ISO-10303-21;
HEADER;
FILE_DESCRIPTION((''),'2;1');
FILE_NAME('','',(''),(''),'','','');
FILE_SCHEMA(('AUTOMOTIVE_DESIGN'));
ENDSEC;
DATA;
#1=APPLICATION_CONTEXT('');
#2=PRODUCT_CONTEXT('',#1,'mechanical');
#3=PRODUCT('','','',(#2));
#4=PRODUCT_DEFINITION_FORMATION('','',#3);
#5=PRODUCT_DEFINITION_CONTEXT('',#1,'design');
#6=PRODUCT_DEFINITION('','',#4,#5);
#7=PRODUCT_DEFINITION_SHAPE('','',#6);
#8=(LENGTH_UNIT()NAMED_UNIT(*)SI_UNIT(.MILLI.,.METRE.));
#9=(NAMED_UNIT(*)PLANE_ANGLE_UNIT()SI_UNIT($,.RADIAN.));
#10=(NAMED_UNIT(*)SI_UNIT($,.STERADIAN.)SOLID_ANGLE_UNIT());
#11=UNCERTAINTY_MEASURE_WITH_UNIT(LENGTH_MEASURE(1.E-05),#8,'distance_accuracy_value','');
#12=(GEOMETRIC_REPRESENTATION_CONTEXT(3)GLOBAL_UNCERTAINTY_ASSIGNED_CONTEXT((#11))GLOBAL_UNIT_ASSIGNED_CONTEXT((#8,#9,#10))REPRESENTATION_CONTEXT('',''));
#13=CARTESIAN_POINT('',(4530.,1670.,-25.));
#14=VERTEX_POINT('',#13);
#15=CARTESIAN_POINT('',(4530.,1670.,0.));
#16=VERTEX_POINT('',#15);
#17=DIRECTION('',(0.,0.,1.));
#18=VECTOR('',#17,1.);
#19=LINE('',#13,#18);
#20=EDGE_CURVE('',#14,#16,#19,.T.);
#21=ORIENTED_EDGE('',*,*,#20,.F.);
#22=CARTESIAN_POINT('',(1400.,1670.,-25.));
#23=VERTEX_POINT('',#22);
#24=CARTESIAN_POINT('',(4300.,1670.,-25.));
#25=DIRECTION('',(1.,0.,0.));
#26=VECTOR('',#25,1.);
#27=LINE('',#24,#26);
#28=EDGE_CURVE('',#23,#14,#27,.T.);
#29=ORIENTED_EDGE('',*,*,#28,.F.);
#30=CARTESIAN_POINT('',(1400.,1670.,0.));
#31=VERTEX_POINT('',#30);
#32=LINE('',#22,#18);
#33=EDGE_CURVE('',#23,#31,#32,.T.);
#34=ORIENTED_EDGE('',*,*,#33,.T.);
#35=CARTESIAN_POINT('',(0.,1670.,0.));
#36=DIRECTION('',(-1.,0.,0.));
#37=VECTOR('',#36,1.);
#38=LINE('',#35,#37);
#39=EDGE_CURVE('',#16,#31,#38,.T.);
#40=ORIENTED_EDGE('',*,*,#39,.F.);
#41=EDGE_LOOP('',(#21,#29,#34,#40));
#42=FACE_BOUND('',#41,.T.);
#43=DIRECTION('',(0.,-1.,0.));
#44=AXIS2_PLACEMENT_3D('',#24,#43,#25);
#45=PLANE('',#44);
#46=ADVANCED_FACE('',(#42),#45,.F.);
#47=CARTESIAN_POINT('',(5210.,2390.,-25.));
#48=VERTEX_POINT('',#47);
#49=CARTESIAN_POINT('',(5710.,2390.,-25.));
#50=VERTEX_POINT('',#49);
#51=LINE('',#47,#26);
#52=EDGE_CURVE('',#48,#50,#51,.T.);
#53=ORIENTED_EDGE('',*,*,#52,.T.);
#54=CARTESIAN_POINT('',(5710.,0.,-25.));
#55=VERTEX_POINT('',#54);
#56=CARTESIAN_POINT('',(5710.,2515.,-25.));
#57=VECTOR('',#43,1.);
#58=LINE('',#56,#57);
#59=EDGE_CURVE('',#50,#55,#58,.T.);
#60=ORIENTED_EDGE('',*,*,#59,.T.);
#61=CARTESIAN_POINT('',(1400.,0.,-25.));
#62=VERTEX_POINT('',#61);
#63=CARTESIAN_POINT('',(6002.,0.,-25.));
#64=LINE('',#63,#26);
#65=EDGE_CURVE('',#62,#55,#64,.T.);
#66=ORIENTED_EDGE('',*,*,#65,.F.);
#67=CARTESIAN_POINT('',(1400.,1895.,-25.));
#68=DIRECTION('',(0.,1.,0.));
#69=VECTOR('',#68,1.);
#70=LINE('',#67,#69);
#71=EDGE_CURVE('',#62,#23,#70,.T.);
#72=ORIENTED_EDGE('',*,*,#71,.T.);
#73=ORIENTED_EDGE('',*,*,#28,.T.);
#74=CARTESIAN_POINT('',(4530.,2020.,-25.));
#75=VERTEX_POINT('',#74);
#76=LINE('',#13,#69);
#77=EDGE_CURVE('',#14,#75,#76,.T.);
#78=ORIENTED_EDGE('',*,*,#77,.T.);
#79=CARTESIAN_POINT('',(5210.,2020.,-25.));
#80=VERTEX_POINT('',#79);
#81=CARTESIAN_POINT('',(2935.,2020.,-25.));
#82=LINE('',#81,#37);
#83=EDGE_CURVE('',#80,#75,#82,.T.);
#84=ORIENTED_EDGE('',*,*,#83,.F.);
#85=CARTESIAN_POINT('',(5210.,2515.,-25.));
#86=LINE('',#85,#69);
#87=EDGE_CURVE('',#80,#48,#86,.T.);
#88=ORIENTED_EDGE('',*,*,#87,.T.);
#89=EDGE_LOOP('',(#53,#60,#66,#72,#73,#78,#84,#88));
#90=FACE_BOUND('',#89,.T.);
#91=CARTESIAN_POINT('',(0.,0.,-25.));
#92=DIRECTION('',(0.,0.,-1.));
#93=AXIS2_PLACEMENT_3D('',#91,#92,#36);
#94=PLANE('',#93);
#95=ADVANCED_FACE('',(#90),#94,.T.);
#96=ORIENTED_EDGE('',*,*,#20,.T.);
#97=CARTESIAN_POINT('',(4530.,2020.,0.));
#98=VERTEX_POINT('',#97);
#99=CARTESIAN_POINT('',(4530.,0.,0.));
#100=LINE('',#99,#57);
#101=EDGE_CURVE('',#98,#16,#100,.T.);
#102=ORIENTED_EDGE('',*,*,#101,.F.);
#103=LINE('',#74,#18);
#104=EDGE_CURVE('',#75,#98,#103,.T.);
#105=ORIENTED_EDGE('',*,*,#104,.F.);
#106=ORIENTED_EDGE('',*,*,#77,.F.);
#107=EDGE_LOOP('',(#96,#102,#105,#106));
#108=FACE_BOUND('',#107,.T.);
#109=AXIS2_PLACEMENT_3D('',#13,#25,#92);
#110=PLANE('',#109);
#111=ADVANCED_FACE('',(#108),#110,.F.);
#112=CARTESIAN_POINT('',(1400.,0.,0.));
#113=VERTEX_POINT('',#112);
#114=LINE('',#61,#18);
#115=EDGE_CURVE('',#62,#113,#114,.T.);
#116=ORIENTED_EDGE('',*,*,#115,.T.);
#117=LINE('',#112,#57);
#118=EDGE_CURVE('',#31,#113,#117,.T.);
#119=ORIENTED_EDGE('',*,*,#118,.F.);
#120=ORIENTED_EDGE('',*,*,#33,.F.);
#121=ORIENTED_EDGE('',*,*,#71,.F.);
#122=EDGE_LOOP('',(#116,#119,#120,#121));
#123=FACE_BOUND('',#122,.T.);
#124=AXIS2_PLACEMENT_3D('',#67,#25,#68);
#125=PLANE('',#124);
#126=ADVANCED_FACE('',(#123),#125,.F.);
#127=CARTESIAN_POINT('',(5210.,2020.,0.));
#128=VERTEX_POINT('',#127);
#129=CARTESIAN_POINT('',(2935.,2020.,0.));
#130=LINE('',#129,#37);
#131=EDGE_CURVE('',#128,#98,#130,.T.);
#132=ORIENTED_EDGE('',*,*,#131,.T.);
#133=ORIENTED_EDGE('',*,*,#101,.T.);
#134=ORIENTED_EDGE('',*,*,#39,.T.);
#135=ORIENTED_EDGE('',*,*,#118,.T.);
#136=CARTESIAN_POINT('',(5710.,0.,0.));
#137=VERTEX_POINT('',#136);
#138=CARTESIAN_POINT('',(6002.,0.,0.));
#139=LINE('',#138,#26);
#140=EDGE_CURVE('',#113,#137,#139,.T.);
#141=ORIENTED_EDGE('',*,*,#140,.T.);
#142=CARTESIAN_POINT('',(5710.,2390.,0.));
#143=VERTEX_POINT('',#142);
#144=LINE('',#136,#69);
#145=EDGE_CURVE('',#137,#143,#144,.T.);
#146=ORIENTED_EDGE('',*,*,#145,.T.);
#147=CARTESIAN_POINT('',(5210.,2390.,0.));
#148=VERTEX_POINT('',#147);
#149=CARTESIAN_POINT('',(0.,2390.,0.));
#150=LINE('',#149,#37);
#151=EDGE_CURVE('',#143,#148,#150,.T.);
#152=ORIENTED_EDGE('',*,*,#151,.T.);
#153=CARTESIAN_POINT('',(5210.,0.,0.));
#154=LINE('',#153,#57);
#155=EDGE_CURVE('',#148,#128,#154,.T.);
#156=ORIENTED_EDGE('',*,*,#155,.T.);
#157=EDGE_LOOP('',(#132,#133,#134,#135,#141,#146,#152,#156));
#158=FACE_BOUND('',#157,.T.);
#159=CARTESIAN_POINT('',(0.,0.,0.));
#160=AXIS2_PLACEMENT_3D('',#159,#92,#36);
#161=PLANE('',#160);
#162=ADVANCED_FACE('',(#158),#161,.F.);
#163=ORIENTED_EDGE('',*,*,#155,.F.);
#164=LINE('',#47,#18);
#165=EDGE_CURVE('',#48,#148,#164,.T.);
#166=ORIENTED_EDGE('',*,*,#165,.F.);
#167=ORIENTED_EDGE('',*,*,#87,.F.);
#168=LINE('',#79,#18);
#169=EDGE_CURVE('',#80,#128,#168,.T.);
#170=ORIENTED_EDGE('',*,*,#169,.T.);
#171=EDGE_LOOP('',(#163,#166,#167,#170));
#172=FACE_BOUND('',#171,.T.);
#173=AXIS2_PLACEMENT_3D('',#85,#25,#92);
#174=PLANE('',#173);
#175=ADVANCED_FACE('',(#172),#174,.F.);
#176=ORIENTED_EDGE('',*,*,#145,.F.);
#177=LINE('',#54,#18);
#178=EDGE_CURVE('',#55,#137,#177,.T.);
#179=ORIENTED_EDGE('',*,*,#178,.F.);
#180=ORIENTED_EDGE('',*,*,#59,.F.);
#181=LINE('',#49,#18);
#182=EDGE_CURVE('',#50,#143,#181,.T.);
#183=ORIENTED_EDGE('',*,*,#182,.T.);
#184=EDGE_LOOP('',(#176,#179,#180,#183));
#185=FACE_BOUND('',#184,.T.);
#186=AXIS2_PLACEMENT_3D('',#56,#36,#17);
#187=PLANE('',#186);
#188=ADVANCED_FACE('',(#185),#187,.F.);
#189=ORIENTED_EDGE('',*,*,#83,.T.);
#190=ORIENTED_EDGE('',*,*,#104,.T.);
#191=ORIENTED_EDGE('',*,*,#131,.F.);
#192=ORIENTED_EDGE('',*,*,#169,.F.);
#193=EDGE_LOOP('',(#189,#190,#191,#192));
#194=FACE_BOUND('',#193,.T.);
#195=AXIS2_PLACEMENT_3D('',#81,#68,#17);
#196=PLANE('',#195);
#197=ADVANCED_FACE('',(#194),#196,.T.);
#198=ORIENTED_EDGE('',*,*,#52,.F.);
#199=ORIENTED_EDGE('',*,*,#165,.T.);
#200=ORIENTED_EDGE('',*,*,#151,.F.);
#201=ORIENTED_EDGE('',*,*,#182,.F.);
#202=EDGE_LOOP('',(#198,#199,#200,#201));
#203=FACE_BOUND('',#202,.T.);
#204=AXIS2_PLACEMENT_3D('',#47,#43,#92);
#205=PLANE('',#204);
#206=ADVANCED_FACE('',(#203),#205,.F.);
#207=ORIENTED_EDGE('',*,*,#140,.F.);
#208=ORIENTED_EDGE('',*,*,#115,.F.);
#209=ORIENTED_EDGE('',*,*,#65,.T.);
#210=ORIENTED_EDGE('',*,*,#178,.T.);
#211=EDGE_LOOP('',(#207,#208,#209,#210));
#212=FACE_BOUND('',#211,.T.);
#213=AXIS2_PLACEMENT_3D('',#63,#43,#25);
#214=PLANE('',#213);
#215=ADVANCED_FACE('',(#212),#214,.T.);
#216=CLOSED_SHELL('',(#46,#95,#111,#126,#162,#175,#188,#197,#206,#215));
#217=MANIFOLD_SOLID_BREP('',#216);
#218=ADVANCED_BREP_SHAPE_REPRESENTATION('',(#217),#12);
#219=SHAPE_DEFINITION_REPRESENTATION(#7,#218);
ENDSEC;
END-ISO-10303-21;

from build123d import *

# Parameters (mm, degrees)
TABAN_FLAN_1_DEPTH         = 25
KES_EKSTR_ZYON1_DEPTH      = 6508.676543898
KES_EKSTR_ZYON1_DEPTH_BACK = 6508.676543898
IZIM7_W                    = 1400
IZIM7_H                    = 1895
IZIM7_W_2                  = 310
IZIM7_H_2                  = 495
KES_EKSTR_ZYON2_DEPTH      = 6508.676543898
KES_EKSTR_ZYON2_DEPTH_BACK = 6508.676543898
IZIM8_W                    = 292
IZIM8_H                    = 2515
KES_EKSTR_ZYON3_DEPTH      = 6240.38698912
KES_EKSTR_ZYON3_DEPTH_BACK = 6240.38698912
IZIM10_W                   = 2900
IZIM10_H                   = 350
KES_EKSTR_ZYON4_DEPTH      = 6240.38698912
KES_EKSTR_ZYON4_DEPTH_BACK = 6240.38698912


# Sheet-metal steps are written as plain solids
with BuildPart() as part:
    # Çizim1 → Taban-Flanş1 (new body)
    with BuildSketch(Plane.XY):
        Polygon((0, 0), (0, 1895), (2935, 1895), (2935, 2020), (4900, 2020), (4900, 2515), (6002, 2515), (6002, 0), align=None)
    extrude(amount=-TABAN_FLAN_1_DEPTH)

    # Çizim7 → Kes-Ekstrüzyon1 (cut, two sides: drawn at the far end of the back side and taken through both)
    with BuildSketch(Plane.XY.offset(-KES_EKSTR_ZYON1_DEPTH_BACK)):
        with Locations((700, 947.5)):
            Rectangle(IZIM7_W, IZIM7_H)
        with Locations((5055, 2267.5)):
            Rectangle(IZIM7_W_2, IZIM7_H_2)
    extrude(amount=KES_EKSTR_ZYON1_DEPTH + KES_EKSTR_ZYON1_DEPTH_BACK, mode=Mode.SUBTRACT)

    # Çizim8 → Kes-Ekstrüzyon2 (cut, two sides: drawn at the far end of the back side and taken through both)
    with BuildSketch(Plane.XY.offset(-KES_EKSTR_ZYON2_DEPTH_BACK)):
        with Locations((5856, 1257.5)):
            Rectangle(IZIM8_W, IZIM8_H)
    extrude(amount=KES_EKSTR_ZYON2_DEPTH + KES_EKSTR_ZYON2_DEPTH_BACK, mode=Mode.SUBTRACT)

    # Çizim10 → Kes-Ekstrüzyon3 (cut, two sides: drawn at the far end of the back side and taken through both)
    with BuildSketch(Plane.XY.offset(-KES_EKSTR_ZYON3_DEPTH_BACK)):
        with Locations((2850, 1845)):
            Rectangle(IZIM10_W, IZIM10_H)
    extrude(amount=KES_EKSTR_ZYON3_DEPTH + KES_EKSTR_ZYON3_DEPTH_BACK, mode=Mode.SUBTRACT)

    # Çizim11 → Kes-Ekstrüzyon4 (cut, two sides: drawn at the far end of the back side and taken through both)
    with BuildSketch(Plane.XY.offset(-KES_EKSTR_ZYON4_DEPTH_BACK)):
        Polygon((4300, 1670), (4530, 1670), (4530, 2020), (5210, 2020), (5210, 2390), (5710, 2390), (5778.630385148, 2406.496682207), (5749.815338653, 2697.266696836), (5189.231706845, 2697.266696836), (4530, 2199.552257381), (4300, 2199.552257381), align=None)
    extrude(amount=KES_EKSTR_ZYON4_DEPTH + KES_EKSTR_ZYON4_DEPTH_BACK, mode=Mode.SUBTRACT)


solid = part.part
